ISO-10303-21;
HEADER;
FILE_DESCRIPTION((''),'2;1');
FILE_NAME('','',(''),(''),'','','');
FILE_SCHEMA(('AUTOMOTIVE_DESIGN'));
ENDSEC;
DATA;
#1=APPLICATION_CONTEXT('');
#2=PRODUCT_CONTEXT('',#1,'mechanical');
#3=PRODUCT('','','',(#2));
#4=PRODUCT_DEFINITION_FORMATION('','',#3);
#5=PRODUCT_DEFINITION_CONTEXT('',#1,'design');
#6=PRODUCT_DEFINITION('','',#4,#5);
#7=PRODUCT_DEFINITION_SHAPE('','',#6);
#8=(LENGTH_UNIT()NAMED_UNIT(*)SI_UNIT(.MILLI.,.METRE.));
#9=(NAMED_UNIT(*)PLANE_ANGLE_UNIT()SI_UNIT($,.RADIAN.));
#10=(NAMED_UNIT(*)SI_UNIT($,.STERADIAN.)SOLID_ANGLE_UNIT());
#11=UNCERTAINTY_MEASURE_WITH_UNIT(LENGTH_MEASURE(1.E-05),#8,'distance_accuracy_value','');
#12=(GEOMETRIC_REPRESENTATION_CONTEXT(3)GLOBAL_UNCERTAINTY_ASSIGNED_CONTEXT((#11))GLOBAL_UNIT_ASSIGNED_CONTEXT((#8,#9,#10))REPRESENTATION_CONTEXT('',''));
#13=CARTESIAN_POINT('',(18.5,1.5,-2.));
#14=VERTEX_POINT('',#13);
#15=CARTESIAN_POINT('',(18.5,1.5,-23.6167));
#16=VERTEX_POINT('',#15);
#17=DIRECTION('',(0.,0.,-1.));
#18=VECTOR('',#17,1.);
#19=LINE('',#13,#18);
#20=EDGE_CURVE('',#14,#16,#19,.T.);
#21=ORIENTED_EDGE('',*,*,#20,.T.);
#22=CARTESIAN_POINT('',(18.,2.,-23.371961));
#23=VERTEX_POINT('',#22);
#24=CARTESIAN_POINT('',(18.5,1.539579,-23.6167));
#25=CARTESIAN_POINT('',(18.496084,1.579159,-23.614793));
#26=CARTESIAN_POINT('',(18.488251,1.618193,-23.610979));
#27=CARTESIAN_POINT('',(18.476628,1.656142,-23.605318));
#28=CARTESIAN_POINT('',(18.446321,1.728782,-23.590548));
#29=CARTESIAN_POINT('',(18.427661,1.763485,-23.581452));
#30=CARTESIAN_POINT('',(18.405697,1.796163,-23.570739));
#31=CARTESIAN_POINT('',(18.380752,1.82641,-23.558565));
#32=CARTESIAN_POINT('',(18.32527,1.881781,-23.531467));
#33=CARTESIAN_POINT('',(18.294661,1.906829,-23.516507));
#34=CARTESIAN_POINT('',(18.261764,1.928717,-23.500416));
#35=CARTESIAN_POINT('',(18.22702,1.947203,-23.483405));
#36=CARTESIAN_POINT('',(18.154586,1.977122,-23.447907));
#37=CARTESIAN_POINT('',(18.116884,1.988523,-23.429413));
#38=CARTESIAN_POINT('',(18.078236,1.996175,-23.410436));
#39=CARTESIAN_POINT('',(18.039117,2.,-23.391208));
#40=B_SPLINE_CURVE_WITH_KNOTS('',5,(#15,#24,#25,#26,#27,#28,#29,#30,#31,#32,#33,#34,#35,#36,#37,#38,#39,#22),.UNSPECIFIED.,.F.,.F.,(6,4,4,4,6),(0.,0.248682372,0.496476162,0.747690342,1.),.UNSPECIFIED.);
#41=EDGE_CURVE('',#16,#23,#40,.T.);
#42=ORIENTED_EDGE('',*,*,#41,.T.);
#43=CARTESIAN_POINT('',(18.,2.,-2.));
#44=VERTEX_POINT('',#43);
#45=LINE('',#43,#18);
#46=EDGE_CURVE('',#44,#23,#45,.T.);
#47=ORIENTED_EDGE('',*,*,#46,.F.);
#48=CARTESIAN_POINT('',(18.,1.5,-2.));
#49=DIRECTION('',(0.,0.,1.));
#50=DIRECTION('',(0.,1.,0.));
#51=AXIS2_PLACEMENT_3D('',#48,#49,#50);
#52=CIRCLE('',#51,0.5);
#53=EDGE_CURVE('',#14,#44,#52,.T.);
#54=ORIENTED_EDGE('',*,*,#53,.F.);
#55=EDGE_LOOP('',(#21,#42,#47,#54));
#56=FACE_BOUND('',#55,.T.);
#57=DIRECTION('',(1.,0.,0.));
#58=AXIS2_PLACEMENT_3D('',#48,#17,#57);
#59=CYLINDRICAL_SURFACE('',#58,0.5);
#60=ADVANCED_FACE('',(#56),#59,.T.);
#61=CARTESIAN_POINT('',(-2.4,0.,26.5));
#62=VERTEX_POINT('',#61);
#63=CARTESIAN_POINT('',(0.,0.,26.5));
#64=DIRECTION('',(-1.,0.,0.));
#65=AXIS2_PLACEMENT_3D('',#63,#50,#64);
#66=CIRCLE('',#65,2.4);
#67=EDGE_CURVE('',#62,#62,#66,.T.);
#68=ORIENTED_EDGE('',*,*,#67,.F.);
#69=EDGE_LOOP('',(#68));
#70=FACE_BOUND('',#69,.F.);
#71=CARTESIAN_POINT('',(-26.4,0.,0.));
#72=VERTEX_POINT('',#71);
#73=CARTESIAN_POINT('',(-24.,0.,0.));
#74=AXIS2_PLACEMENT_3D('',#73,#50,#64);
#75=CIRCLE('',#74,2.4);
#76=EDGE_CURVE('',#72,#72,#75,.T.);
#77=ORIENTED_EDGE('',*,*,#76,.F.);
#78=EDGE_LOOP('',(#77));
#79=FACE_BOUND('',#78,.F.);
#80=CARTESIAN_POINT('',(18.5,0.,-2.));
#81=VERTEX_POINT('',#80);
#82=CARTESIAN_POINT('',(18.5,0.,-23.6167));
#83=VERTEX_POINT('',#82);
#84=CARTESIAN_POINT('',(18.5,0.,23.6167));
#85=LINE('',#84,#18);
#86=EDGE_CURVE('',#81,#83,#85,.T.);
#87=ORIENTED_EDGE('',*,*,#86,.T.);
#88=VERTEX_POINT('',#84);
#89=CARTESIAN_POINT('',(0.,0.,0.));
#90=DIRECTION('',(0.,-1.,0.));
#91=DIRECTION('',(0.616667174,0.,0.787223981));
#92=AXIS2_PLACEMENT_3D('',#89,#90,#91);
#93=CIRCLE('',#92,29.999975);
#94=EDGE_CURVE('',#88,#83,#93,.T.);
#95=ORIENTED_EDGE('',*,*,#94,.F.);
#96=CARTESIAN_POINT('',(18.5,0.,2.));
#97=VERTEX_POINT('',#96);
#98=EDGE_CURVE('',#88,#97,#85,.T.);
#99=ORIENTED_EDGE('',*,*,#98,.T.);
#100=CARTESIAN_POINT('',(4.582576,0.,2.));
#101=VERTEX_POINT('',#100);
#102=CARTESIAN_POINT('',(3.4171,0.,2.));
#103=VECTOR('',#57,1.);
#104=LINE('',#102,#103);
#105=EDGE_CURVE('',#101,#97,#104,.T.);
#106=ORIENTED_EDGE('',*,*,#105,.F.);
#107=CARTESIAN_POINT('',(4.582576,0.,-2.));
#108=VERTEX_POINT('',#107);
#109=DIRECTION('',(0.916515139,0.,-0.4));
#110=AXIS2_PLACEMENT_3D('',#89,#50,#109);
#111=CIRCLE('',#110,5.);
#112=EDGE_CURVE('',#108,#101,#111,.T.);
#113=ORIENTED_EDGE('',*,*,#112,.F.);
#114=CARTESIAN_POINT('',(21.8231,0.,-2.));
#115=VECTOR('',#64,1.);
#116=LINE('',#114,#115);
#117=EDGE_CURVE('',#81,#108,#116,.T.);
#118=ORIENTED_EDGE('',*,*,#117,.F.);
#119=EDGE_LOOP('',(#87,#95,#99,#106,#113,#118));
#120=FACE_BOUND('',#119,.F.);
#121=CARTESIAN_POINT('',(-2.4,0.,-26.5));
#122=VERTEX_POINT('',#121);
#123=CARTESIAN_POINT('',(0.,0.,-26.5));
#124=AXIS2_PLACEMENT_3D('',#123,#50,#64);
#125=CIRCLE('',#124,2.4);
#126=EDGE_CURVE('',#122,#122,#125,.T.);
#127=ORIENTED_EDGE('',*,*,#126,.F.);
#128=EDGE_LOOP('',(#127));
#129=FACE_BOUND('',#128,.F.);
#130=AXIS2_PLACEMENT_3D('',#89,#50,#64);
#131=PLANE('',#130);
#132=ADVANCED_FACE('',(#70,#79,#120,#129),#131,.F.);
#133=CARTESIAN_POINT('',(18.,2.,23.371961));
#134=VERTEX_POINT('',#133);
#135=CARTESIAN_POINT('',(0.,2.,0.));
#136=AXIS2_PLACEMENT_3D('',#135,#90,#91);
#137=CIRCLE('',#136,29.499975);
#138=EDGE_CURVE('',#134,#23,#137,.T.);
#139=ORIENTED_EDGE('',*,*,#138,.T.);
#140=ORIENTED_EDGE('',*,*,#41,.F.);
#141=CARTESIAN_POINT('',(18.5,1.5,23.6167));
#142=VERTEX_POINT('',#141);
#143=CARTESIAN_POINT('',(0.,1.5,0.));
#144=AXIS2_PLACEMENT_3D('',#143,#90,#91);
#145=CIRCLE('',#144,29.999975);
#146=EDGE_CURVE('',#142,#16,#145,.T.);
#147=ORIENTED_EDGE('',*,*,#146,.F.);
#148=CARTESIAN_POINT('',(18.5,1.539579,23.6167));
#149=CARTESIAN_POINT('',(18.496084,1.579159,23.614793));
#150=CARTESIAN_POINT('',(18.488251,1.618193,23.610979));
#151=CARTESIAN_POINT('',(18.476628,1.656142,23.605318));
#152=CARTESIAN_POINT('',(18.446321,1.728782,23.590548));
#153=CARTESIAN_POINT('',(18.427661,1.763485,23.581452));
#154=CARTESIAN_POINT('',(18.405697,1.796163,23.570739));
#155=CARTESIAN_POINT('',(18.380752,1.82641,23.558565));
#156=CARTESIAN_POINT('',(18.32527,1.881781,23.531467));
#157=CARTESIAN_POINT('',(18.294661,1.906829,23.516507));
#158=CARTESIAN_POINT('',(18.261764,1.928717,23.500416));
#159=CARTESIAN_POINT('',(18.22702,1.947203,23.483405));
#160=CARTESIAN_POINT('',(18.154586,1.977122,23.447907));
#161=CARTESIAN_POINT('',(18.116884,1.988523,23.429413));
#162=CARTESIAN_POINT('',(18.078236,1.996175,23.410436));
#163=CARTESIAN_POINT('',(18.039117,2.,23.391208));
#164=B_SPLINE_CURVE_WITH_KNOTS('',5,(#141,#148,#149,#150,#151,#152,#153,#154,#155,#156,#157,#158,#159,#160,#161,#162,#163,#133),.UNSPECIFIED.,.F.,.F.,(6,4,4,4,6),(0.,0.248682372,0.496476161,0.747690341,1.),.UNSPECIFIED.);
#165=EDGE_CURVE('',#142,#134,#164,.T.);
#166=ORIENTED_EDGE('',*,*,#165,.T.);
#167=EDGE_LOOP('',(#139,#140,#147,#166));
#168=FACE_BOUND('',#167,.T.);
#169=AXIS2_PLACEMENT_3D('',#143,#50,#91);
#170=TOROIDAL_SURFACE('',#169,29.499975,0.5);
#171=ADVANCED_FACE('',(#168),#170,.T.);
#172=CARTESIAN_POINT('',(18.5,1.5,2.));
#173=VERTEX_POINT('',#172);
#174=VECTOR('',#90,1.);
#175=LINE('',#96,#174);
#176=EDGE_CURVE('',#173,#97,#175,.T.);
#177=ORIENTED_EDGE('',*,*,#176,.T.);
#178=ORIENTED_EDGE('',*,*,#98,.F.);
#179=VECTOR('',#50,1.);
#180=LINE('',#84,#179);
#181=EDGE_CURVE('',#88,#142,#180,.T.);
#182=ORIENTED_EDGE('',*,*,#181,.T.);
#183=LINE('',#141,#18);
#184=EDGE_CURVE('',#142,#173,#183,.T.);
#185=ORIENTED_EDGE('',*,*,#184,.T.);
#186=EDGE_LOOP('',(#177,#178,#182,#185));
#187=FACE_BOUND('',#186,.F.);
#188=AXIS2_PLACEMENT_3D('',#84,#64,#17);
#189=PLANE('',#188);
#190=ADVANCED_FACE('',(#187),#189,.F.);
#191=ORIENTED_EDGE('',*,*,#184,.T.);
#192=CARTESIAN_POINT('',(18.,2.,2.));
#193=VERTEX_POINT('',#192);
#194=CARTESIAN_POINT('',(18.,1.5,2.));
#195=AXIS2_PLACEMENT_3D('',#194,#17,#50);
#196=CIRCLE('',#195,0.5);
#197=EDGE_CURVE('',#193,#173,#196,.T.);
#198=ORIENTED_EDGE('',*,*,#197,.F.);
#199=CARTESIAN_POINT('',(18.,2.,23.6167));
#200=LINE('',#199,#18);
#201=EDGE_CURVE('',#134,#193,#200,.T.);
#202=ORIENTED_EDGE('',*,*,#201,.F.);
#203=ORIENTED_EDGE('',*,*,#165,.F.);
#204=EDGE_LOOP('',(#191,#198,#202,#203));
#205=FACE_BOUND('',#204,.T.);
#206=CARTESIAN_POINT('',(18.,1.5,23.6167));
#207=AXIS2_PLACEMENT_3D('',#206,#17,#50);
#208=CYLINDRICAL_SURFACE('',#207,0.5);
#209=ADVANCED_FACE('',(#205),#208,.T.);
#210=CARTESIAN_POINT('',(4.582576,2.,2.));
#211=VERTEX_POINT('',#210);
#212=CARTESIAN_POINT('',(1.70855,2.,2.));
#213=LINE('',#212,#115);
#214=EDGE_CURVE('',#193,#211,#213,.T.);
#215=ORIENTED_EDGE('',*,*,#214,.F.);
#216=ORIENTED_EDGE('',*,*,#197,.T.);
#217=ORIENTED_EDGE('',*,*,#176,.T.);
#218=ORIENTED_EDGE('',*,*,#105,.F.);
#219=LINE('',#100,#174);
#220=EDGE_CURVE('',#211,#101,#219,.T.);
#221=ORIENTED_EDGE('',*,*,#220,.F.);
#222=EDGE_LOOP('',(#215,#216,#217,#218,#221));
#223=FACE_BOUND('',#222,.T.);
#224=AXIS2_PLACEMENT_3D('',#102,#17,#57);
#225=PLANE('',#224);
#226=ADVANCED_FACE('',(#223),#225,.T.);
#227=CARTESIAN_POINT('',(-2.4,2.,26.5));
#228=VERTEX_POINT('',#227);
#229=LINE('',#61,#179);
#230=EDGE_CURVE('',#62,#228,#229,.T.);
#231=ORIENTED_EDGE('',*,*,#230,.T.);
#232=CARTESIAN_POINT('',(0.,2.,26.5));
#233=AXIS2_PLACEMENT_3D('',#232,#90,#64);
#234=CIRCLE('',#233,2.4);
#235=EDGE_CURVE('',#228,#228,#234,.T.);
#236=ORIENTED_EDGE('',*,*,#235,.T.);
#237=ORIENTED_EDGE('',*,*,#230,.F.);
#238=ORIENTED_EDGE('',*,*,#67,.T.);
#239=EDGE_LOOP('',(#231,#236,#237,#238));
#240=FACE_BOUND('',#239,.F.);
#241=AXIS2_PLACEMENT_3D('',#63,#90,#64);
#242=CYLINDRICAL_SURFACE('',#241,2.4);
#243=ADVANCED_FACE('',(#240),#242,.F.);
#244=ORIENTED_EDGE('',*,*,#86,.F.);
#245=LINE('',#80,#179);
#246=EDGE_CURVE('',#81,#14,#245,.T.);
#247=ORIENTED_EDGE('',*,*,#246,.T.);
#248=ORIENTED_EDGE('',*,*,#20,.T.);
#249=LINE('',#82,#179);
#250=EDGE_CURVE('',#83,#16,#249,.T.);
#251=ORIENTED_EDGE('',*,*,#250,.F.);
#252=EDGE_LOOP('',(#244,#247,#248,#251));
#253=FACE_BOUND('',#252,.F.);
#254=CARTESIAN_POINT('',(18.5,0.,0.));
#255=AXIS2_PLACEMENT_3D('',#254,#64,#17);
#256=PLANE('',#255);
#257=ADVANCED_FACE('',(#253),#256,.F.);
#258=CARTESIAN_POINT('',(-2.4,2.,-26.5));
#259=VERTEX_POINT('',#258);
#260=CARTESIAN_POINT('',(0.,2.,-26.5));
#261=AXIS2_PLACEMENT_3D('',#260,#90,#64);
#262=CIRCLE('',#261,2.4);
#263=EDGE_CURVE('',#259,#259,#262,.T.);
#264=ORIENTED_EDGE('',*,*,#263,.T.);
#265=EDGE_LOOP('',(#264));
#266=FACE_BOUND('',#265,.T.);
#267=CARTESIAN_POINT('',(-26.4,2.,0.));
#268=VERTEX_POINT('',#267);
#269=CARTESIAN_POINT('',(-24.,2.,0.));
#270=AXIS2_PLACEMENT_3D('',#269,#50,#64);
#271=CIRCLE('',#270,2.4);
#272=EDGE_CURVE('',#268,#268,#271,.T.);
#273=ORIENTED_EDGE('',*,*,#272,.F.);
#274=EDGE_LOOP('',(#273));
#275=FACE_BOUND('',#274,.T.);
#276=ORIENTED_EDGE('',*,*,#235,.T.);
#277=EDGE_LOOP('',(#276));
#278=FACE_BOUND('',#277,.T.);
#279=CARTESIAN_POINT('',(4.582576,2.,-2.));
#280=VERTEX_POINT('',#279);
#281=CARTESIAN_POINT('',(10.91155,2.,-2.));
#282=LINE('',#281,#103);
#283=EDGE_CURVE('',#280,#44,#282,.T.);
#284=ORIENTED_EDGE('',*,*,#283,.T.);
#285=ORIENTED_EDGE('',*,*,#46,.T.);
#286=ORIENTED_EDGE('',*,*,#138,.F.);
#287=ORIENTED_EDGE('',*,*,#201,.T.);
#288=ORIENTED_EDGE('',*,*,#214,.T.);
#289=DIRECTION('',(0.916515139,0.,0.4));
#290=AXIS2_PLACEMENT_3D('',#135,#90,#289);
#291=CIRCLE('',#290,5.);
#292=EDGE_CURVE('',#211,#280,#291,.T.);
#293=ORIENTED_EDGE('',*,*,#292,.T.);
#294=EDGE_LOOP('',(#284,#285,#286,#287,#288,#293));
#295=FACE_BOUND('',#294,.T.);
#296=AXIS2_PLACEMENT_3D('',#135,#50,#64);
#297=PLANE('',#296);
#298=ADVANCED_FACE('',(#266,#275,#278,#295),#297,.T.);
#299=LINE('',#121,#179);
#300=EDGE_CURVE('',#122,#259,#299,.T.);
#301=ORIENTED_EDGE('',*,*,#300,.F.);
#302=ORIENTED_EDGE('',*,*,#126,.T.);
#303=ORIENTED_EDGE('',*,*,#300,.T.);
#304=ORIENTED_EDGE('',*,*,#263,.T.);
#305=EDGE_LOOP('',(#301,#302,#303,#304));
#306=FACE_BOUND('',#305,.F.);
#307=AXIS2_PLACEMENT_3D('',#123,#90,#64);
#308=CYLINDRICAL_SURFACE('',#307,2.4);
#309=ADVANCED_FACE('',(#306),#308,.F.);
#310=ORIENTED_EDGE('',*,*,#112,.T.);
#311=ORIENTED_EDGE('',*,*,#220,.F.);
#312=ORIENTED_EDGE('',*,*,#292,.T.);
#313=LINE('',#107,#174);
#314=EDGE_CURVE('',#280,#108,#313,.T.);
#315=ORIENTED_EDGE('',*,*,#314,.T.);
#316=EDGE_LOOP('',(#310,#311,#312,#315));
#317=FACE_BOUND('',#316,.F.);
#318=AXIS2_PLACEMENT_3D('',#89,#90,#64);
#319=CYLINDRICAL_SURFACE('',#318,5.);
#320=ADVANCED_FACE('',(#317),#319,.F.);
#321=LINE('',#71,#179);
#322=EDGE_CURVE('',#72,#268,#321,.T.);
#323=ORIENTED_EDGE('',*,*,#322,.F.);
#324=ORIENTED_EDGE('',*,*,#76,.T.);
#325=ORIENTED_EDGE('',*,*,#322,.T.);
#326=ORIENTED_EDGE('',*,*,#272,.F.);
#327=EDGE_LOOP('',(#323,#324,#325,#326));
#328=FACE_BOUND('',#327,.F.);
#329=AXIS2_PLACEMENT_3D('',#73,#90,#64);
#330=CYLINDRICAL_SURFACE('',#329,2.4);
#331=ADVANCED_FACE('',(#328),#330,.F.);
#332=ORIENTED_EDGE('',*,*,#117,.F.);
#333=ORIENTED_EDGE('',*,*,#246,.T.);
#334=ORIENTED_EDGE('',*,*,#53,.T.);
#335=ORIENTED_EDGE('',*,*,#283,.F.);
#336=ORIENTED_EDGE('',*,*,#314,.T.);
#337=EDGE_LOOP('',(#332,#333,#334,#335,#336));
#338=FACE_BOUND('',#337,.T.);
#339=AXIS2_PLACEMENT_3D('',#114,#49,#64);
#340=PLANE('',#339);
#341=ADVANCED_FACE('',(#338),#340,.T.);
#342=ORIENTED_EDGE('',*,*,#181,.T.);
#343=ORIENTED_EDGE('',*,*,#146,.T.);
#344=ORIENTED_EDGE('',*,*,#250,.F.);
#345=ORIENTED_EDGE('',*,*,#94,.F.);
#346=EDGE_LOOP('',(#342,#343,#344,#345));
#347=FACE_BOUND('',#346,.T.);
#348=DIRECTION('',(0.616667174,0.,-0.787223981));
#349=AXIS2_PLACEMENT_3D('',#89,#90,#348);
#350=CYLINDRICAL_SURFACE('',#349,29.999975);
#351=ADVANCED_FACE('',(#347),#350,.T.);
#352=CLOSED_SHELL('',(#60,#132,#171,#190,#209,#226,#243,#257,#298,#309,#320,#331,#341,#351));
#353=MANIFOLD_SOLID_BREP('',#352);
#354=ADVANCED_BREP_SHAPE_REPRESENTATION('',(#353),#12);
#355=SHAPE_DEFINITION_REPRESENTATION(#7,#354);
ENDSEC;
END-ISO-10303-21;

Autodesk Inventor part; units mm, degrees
ref_plane "YZ Plane" through (0, 0, 0) normal (1, 0, 0) x (0, 1, 0)
ref_plane "XZ Plane" through (0, 0, 0) normal (0, 1, 0) x (-1, 0, 0)
ref_plane "XY Plane" through (0, 0, 0) normal (0, 0, 1) x (1, 0, 0)
sketch "Sketch1" plane through (0, 0, 0) normal (0, 1, 0) x (-1, 0, 0)
  arc A0 (-18.5, -23.6167) -> (-18.5, 23.6167) centre (0, 0) ccw
  line L0 (30, 0) -> (24, 0)
  circle A1 centre (24, 0) radius 2.4
  line L1 (0, 30) -> (0, 26.5)
  line L2 (0, -30) -> (0, -26.5)
  circle A2 centre (0, 26.5) radius 2.4
  circle A3 centre (0, -26.5) radius 2.4
  circle A4 centre (0, 0) radius 5
  line L3 (-30, 0) -> (-18.5, 0)
  line L4 (-18.5, 23.6167) -> (-18.5, -23.6167)
  dimension "d0" = 60
  dimension "d1" = 6
  dimension "d2" = 4.8
  dimension "d3" = 3.5
  dimension "d4" = 3.5
  dimension "d5" = 4.8
  dimension "d6" = 4.8
  dimension "d7" = 10
  dimension "d8" = 11.5
extrude "Extrusion1" add sketch "Sketch1" along normal blind 2
sketch "Sketch2" plane through (0, 2, 0) normal (0, 1, 0) x (1, 0, 0)
  point P0 (0, 0)
sketch "Sketch3" plane through (0, 2, 0) normal (0, 1, 0) x (1, 0, 0)
  point P0 (0, 0)
sketch "Sketch4" plane through (0, 0, 0) normal (0, -1, 0) x (1, 0, 0)
  line L0 (21.8231, -2) -> (3.4171, -2)
  line L1 (3.4171, -2) -> (3.4171, 2)
  line L2 (3.4171, 2) -> (21.8231, 2)
  line L3 (21.8231, 2) -> (21.8231, -2)
  line L4 (21.8231, -2) -> (3.4171, 2) construction
  line L5 (3.4171, -2) -> (21.8231, 2) construction
  point P0 (0, 0)
  point P1 (12.6201, 0)
  dimension "d17" = 4
extrude "Extrusion2" cut sketch "Sketch4" against normal blind 3
fillet "Fillet1" radius 0.5 3 edges at (-30, 2, 0) (18.5, 2, -12.8084) (18.5, 2, 12.8084)
properties part number "webcam_holder_center_part2"
